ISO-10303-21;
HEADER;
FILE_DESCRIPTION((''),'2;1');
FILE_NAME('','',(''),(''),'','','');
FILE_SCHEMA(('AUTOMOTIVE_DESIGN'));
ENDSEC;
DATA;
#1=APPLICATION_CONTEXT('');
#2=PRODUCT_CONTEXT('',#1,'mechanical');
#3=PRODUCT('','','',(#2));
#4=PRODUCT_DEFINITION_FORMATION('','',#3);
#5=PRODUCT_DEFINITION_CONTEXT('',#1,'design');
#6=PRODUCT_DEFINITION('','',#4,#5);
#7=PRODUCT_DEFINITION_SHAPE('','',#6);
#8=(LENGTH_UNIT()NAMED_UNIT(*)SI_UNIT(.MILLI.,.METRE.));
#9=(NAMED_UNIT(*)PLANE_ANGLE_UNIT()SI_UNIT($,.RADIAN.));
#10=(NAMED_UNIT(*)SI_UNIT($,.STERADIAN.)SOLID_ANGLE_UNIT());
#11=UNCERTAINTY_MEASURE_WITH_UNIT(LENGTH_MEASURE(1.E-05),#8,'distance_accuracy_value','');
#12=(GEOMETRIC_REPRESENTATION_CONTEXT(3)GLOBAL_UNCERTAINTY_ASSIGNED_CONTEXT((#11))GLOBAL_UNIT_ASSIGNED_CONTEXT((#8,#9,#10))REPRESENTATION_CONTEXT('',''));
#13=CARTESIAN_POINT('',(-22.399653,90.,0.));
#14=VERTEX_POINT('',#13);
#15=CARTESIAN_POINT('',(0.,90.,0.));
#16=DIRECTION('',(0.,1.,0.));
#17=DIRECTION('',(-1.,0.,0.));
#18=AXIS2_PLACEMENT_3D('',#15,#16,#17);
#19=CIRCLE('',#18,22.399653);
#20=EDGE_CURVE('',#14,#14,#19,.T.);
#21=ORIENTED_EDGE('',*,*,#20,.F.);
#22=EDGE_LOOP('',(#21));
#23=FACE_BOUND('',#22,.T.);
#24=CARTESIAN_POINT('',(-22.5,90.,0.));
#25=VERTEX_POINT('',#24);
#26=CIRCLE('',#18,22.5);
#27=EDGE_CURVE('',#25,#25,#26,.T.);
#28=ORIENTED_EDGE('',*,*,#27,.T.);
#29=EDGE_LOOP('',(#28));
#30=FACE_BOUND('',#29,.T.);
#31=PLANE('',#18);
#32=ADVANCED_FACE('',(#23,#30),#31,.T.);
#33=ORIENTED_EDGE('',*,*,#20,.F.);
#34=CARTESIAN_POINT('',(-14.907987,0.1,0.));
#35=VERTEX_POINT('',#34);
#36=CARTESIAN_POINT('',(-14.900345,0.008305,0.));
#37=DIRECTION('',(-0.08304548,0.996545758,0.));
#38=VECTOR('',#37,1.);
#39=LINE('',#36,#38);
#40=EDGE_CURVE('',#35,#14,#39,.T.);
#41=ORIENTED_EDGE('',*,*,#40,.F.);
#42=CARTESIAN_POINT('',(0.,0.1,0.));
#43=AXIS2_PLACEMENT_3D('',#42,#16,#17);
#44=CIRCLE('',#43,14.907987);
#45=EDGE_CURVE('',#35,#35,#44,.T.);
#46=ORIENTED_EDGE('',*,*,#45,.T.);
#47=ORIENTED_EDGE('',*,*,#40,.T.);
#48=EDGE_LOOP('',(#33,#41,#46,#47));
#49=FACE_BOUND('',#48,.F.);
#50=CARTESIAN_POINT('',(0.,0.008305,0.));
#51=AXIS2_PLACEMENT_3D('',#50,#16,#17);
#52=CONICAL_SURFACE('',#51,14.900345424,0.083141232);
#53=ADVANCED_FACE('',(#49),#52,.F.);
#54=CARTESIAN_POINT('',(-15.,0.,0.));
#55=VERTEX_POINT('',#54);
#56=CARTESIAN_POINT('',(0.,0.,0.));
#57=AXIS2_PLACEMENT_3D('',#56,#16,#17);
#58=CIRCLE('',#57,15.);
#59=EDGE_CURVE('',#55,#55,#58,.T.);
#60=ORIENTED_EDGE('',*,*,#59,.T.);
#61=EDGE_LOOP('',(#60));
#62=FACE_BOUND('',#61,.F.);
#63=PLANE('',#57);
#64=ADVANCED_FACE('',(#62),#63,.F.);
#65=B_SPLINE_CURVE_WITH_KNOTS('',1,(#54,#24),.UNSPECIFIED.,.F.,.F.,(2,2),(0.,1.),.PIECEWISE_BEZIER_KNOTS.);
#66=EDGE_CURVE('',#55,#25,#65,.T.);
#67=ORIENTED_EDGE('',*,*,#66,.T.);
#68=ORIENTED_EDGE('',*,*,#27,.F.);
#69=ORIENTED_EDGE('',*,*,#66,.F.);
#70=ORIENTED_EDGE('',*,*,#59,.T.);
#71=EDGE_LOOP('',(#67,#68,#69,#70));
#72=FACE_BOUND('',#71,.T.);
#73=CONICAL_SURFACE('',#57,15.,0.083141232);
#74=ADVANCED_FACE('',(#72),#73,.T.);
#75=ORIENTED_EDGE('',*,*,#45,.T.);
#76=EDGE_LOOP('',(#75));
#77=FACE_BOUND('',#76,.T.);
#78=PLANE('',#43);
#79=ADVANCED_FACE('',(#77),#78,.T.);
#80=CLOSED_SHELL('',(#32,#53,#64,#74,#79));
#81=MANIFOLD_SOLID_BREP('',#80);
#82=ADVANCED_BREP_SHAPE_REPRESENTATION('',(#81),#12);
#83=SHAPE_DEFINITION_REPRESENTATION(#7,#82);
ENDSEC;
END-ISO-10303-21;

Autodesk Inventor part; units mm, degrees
ref_plane "YZ Plane" through (0, 0, 0) normal (1, 0, 0) x (0, 1, 0)
ref_plane "XY Plane" through (0, 0, 0) normal (0, 0, 1) x (1, 0, 0)
sketch "Sketch1" plane through (0, 0, 0) normal (0, 1, 0) x (-1, 0, 0)
  circle A0 centre (0, 0) radius 15
  dimension "d0" = 30
ref_plane "Work Plane1" through (0, 90, 0) normal (0, 1, 0) x (-1, 0, 0)
sketch "Sketch2" plane through (0, 90, 0) normal (0, 1, 0) x (-1, 0, 0)
  circle A0 centre (0, 0) radius 22.5
  dimension "d3" = 45
loft "Loft1" add profiles "Sketch1", "Sketch2"
sketch "Sketch4" plane through (0, 90, 0) normal (0, 1, 0) x (1, 0, 0)
  point P0 (0, 0)
shell "Shell1" thickness 0.1 removed faces 1 at (-7.2821, 90, -1.7949)
properties part number "copo_001"
